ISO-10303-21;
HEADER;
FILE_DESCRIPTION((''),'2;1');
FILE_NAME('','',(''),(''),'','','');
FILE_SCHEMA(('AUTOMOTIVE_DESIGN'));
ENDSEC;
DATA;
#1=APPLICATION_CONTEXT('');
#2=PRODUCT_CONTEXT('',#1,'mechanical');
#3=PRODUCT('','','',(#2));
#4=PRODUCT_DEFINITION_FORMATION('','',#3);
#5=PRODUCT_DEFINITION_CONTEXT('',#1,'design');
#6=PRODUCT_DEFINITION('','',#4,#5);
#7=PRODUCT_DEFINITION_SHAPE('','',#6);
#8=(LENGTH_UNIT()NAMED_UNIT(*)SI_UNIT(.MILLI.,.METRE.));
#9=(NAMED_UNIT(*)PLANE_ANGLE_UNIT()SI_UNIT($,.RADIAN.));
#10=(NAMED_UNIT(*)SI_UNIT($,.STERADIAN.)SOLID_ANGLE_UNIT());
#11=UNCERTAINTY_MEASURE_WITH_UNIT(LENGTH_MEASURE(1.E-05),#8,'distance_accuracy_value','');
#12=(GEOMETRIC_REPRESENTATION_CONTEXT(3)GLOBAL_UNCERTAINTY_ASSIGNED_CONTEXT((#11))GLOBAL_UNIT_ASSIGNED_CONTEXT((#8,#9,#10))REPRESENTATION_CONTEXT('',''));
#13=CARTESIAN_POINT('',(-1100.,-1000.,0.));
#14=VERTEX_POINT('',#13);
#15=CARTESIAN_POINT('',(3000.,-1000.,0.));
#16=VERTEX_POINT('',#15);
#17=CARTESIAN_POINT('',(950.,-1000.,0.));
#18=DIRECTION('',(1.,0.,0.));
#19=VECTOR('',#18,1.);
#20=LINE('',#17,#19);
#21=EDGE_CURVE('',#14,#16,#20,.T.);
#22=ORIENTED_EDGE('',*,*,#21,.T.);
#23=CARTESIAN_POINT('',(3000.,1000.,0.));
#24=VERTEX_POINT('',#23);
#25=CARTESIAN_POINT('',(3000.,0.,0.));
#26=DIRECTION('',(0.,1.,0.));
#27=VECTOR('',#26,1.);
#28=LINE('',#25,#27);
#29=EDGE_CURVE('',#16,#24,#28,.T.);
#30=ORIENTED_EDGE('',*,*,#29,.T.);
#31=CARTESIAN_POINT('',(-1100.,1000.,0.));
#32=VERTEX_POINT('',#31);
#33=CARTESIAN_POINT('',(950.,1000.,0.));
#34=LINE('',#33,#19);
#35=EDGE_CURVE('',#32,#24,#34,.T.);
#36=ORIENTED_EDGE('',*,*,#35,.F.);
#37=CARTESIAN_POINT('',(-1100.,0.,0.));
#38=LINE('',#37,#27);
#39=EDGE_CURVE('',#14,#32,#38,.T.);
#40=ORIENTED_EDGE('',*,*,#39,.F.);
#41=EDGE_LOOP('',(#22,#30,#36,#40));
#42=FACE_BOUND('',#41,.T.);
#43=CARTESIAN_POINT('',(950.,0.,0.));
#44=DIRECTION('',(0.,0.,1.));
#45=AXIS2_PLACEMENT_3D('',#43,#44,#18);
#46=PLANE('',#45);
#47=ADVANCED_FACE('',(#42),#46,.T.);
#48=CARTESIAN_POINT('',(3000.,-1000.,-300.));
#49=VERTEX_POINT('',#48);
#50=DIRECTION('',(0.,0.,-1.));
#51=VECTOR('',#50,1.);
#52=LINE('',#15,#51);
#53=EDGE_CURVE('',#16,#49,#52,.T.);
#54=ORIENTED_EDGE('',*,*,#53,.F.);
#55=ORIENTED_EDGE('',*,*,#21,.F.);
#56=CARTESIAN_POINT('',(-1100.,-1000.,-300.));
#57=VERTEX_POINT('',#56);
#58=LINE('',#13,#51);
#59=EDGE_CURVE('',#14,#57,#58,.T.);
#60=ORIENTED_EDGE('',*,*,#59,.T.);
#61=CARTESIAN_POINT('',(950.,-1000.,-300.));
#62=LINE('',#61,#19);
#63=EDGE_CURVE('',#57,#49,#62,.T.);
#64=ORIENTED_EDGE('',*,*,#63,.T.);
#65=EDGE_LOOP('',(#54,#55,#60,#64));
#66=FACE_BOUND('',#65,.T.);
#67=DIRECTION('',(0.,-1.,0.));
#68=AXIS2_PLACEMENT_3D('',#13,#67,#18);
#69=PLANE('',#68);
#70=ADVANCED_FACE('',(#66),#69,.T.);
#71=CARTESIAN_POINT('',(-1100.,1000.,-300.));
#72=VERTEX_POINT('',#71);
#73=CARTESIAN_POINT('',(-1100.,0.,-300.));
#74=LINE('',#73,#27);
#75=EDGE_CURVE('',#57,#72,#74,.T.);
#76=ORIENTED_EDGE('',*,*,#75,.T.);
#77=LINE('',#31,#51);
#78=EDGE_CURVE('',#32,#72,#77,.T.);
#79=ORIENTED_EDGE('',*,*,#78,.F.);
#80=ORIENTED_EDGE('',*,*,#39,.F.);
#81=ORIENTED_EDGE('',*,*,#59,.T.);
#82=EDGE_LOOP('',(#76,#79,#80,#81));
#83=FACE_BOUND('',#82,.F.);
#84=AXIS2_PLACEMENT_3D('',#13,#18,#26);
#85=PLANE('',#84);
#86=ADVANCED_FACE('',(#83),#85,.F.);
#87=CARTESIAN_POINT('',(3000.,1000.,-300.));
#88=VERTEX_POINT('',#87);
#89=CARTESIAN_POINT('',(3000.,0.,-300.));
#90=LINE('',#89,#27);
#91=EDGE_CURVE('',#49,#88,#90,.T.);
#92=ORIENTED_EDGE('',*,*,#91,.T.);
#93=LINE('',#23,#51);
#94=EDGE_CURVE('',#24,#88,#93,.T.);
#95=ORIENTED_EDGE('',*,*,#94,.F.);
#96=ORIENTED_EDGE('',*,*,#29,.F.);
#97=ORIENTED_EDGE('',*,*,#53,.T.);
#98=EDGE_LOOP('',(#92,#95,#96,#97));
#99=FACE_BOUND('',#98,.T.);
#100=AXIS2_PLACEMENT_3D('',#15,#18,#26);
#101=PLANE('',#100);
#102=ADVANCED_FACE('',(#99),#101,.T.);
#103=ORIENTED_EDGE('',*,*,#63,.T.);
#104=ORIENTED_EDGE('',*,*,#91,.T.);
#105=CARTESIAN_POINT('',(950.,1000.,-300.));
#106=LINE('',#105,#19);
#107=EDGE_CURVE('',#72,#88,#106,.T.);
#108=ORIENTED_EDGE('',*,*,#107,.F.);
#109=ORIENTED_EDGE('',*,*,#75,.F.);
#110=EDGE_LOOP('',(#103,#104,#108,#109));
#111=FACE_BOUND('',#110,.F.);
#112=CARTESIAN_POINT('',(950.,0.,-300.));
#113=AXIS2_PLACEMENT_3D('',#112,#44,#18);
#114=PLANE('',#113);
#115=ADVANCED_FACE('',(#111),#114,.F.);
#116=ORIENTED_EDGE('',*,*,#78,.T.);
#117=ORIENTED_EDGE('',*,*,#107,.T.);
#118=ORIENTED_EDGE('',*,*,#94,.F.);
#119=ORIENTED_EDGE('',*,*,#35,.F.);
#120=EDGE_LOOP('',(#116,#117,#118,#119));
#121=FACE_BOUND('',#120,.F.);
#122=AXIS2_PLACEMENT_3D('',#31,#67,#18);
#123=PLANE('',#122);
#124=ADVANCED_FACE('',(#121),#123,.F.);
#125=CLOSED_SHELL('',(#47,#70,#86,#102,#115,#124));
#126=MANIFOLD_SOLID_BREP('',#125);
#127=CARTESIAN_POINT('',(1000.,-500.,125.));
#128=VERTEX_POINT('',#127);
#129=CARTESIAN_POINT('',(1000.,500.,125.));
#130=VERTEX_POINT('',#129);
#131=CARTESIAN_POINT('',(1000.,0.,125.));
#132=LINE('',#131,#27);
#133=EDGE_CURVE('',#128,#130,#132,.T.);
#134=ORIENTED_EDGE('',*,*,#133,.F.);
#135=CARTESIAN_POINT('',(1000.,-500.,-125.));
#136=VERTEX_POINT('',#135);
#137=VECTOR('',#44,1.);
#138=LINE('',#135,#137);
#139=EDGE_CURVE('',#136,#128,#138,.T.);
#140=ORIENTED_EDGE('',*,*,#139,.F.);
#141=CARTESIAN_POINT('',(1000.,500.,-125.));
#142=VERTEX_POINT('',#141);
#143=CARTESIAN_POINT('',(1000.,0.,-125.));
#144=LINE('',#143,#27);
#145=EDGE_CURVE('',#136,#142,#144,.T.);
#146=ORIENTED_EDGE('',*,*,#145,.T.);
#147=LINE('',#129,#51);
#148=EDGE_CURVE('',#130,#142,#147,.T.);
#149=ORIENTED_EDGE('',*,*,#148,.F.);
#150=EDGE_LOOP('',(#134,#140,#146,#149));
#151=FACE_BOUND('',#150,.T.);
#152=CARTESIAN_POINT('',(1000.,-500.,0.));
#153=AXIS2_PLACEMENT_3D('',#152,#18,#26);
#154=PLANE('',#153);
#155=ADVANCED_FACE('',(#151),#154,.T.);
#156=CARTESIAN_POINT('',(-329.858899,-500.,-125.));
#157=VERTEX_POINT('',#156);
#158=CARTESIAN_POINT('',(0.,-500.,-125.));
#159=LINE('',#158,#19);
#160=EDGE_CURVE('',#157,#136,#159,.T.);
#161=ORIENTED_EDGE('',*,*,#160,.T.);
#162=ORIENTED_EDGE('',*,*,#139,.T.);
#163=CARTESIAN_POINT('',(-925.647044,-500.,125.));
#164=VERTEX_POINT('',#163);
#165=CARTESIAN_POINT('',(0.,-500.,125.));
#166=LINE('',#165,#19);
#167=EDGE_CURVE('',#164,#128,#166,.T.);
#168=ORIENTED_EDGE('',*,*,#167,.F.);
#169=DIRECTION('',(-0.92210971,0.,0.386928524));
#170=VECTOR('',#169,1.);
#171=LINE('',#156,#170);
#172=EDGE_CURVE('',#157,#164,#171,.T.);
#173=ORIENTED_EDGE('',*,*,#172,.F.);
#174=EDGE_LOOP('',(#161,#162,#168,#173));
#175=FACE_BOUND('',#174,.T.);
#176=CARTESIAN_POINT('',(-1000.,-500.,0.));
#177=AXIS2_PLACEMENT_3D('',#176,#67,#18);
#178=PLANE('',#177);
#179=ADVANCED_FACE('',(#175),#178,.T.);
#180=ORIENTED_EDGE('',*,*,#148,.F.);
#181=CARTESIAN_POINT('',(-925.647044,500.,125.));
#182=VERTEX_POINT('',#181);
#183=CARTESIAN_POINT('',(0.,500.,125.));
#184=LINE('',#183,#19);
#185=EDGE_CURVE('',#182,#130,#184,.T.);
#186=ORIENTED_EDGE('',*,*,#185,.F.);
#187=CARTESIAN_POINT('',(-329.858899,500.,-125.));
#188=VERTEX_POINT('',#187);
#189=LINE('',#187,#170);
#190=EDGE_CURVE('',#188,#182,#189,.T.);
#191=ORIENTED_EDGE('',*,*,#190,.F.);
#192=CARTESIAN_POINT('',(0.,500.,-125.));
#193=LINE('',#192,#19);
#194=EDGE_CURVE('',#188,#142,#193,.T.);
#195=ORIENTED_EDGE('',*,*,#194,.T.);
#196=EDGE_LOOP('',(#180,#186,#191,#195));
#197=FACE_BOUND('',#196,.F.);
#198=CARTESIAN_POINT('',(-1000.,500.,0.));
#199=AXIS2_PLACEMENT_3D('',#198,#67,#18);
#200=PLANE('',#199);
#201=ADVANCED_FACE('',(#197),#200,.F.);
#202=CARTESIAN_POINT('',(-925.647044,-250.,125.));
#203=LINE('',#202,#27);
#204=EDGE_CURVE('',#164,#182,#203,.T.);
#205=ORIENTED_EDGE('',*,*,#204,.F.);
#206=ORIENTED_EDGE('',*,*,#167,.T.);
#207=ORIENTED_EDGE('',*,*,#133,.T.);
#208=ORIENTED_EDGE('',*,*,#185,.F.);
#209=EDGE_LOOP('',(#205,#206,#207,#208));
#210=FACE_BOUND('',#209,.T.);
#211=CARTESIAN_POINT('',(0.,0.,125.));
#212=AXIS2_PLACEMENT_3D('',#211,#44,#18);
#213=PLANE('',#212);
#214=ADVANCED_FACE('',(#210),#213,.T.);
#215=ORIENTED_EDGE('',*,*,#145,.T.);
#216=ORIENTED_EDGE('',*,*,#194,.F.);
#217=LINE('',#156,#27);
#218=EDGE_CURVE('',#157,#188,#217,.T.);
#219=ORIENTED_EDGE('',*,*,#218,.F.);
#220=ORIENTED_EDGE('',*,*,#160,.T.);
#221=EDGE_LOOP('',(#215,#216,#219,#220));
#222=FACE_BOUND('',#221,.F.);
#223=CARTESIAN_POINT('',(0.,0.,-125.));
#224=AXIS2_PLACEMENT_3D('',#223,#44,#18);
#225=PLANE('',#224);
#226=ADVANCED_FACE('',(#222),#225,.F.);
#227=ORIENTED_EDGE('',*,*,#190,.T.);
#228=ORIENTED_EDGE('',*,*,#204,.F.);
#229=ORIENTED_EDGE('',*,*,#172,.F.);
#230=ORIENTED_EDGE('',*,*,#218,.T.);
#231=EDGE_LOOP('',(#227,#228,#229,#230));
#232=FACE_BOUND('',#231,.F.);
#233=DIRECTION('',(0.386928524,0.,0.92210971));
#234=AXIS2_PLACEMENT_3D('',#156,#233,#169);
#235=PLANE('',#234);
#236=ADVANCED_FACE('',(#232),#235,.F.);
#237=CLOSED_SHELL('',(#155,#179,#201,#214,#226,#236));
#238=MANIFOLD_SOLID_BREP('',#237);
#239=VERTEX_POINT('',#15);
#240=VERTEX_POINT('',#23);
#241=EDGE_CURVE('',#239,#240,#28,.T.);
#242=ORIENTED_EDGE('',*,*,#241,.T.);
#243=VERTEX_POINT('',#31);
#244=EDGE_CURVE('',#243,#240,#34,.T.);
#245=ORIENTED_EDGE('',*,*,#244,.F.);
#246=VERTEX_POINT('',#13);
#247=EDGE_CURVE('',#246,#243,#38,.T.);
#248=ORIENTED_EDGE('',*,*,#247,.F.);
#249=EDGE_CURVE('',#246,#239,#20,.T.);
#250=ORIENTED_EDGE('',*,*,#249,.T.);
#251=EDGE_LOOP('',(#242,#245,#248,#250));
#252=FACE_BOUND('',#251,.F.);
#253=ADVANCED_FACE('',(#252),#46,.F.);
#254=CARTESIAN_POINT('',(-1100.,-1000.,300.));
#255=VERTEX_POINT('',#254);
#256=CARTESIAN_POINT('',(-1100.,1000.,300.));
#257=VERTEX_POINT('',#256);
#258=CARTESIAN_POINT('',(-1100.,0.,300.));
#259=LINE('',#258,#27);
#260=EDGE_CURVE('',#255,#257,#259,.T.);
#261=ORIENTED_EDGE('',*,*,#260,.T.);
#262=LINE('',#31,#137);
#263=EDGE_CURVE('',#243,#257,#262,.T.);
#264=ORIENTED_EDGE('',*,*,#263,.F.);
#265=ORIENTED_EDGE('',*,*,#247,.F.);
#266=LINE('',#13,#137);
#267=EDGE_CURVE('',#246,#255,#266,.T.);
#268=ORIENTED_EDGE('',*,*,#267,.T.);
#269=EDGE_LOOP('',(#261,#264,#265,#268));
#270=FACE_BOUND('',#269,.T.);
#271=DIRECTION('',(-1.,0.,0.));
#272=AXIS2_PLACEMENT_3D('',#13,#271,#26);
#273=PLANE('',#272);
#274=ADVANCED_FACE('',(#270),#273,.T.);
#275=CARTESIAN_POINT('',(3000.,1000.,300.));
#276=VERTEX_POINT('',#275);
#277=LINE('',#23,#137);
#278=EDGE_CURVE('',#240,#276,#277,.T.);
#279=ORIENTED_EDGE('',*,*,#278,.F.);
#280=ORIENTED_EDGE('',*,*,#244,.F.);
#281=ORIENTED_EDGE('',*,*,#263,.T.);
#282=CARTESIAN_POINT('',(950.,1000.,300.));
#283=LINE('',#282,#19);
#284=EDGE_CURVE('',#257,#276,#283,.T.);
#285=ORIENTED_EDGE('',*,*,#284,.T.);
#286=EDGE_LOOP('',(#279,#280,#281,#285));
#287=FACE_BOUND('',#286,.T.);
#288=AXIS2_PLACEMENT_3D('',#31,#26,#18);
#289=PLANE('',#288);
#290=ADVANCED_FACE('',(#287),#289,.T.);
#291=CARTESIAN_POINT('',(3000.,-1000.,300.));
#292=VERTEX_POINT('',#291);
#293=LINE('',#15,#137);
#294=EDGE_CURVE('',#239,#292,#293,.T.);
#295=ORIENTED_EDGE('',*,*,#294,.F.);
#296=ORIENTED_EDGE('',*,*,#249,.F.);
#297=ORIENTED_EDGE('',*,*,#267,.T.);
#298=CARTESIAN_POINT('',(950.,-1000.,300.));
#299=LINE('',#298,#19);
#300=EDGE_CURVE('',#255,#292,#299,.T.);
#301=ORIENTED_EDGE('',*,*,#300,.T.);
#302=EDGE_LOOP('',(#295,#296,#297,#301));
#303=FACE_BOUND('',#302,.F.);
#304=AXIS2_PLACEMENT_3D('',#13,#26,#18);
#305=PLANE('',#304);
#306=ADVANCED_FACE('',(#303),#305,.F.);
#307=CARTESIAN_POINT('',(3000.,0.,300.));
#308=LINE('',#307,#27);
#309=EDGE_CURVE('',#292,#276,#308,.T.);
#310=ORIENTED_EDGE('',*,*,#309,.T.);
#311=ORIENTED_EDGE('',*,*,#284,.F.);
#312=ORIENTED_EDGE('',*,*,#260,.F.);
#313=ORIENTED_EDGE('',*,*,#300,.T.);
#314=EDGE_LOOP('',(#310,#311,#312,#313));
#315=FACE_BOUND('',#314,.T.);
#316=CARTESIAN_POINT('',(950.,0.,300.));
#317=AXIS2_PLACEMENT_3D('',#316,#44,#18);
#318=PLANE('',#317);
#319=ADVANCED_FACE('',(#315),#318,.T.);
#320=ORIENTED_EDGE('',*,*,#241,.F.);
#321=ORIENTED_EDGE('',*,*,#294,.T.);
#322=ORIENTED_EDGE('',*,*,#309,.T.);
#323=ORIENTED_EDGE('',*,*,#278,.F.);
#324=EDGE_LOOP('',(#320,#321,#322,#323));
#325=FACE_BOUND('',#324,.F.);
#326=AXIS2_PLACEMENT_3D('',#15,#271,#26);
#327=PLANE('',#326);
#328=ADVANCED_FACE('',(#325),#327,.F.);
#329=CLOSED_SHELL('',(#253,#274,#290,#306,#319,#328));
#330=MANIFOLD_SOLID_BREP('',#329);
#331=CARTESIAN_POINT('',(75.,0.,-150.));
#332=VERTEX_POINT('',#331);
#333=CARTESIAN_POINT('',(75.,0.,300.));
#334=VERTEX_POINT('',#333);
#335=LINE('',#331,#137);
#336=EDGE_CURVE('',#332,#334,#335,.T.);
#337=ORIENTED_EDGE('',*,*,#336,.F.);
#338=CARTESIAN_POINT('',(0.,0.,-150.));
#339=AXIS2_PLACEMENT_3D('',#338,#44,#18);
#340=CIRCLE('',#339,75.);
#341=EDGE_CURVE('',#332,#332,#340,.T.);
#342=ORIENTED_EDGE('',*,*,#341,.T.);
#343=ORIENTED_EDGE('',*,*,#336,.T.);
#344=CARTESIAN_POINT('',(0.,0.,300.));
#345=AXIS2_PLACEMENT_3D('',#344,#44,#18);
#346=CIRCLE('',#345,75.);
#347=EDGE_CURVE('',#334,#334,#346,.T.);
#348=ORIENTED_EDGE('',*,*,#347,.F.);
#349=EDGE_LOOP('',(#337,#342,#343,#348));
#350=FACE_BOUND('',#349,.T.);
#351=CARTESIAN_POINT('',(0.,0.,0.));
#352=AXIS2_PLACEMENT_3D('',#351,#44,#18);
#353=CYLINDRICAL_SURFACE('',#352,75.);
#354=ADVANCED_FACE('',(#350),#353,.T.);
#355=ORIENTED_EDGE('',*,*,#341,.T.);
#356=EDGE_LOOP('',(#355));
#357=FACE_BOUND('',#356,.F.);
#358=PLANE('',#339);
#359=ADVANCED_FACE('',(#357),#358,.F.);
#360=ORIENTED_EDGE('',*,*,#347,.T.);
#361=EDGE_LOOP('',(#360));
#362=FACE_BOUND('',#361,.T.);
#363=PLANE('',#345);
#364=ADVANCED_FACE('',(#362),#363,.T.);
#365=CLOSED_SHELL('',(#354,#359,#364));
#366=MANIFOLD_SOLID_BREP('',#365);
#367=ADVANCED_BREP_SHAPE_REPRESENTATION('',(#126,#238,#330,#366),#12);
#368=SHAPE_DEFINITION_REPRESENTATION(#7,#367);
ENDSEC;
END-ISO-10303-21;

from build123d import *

# Parameters (mm, degrees)
F0_W          = 2000
F0_H          = 1000
F1_DEPTH      = 125
F2_W          = 4100
F2_H          = 2000
F3_DEPTH      = 300
F4_DEPTH      = 300
F6_DEPTH      = 1000
F7_R          = 75
F8_DEPTH      = 300
F8_DEPTH_BACK = 150


with BuildPart() as f1:
    # F0 (on Top) → F1 (new body, symmetric)
    with BuildSketch(Plane.XY):
        Rectangle(F0_W, F0_H)
    extrude(amount=F1_DEPTH, both=True)

    # F5 (on face) → F6 (cut, through all)
    with BuildSketch(Plane.XZ.offset(500)):
        Polygon((-329.8588991165, -125), (-1000, 156.1994105577), (-1000, -125), align=None)
    extrude(amount=-F6_DEPTH, mode=Mode.SUBTRACT)


with BuildPart() as f3:
    # F2 (on Top) → F3 (new body)
    with BuildSketch(Plane.XY):
        with Locations((950, 0)):
            Rectangle(F2_W, F2_H)
    extrude(amount=F3_DEPTH)


with BuildPart() as f4:
    # F2 (on Top) → F4 (new body)
    with BuildSketch(Plane.XY):
        with Locations((950, 0)):
            Rectangle(F2_W, F2_H)
    extrude(amount=-F4_DEPTH)


with BuildPart() as f8:
    # F7 (on Top) → F8 (new body, two sides)
    with BuildSketch(Plane.XY) as f8_sk:
        Circle(F7_R)
    extrude(amount=F8_DEPTH)
    extrude(f8_sk.sketch, amount=-F8_DEPTH_BACK)


solid = Compound([f1.part, f3.part, f4.part, f8.part])
